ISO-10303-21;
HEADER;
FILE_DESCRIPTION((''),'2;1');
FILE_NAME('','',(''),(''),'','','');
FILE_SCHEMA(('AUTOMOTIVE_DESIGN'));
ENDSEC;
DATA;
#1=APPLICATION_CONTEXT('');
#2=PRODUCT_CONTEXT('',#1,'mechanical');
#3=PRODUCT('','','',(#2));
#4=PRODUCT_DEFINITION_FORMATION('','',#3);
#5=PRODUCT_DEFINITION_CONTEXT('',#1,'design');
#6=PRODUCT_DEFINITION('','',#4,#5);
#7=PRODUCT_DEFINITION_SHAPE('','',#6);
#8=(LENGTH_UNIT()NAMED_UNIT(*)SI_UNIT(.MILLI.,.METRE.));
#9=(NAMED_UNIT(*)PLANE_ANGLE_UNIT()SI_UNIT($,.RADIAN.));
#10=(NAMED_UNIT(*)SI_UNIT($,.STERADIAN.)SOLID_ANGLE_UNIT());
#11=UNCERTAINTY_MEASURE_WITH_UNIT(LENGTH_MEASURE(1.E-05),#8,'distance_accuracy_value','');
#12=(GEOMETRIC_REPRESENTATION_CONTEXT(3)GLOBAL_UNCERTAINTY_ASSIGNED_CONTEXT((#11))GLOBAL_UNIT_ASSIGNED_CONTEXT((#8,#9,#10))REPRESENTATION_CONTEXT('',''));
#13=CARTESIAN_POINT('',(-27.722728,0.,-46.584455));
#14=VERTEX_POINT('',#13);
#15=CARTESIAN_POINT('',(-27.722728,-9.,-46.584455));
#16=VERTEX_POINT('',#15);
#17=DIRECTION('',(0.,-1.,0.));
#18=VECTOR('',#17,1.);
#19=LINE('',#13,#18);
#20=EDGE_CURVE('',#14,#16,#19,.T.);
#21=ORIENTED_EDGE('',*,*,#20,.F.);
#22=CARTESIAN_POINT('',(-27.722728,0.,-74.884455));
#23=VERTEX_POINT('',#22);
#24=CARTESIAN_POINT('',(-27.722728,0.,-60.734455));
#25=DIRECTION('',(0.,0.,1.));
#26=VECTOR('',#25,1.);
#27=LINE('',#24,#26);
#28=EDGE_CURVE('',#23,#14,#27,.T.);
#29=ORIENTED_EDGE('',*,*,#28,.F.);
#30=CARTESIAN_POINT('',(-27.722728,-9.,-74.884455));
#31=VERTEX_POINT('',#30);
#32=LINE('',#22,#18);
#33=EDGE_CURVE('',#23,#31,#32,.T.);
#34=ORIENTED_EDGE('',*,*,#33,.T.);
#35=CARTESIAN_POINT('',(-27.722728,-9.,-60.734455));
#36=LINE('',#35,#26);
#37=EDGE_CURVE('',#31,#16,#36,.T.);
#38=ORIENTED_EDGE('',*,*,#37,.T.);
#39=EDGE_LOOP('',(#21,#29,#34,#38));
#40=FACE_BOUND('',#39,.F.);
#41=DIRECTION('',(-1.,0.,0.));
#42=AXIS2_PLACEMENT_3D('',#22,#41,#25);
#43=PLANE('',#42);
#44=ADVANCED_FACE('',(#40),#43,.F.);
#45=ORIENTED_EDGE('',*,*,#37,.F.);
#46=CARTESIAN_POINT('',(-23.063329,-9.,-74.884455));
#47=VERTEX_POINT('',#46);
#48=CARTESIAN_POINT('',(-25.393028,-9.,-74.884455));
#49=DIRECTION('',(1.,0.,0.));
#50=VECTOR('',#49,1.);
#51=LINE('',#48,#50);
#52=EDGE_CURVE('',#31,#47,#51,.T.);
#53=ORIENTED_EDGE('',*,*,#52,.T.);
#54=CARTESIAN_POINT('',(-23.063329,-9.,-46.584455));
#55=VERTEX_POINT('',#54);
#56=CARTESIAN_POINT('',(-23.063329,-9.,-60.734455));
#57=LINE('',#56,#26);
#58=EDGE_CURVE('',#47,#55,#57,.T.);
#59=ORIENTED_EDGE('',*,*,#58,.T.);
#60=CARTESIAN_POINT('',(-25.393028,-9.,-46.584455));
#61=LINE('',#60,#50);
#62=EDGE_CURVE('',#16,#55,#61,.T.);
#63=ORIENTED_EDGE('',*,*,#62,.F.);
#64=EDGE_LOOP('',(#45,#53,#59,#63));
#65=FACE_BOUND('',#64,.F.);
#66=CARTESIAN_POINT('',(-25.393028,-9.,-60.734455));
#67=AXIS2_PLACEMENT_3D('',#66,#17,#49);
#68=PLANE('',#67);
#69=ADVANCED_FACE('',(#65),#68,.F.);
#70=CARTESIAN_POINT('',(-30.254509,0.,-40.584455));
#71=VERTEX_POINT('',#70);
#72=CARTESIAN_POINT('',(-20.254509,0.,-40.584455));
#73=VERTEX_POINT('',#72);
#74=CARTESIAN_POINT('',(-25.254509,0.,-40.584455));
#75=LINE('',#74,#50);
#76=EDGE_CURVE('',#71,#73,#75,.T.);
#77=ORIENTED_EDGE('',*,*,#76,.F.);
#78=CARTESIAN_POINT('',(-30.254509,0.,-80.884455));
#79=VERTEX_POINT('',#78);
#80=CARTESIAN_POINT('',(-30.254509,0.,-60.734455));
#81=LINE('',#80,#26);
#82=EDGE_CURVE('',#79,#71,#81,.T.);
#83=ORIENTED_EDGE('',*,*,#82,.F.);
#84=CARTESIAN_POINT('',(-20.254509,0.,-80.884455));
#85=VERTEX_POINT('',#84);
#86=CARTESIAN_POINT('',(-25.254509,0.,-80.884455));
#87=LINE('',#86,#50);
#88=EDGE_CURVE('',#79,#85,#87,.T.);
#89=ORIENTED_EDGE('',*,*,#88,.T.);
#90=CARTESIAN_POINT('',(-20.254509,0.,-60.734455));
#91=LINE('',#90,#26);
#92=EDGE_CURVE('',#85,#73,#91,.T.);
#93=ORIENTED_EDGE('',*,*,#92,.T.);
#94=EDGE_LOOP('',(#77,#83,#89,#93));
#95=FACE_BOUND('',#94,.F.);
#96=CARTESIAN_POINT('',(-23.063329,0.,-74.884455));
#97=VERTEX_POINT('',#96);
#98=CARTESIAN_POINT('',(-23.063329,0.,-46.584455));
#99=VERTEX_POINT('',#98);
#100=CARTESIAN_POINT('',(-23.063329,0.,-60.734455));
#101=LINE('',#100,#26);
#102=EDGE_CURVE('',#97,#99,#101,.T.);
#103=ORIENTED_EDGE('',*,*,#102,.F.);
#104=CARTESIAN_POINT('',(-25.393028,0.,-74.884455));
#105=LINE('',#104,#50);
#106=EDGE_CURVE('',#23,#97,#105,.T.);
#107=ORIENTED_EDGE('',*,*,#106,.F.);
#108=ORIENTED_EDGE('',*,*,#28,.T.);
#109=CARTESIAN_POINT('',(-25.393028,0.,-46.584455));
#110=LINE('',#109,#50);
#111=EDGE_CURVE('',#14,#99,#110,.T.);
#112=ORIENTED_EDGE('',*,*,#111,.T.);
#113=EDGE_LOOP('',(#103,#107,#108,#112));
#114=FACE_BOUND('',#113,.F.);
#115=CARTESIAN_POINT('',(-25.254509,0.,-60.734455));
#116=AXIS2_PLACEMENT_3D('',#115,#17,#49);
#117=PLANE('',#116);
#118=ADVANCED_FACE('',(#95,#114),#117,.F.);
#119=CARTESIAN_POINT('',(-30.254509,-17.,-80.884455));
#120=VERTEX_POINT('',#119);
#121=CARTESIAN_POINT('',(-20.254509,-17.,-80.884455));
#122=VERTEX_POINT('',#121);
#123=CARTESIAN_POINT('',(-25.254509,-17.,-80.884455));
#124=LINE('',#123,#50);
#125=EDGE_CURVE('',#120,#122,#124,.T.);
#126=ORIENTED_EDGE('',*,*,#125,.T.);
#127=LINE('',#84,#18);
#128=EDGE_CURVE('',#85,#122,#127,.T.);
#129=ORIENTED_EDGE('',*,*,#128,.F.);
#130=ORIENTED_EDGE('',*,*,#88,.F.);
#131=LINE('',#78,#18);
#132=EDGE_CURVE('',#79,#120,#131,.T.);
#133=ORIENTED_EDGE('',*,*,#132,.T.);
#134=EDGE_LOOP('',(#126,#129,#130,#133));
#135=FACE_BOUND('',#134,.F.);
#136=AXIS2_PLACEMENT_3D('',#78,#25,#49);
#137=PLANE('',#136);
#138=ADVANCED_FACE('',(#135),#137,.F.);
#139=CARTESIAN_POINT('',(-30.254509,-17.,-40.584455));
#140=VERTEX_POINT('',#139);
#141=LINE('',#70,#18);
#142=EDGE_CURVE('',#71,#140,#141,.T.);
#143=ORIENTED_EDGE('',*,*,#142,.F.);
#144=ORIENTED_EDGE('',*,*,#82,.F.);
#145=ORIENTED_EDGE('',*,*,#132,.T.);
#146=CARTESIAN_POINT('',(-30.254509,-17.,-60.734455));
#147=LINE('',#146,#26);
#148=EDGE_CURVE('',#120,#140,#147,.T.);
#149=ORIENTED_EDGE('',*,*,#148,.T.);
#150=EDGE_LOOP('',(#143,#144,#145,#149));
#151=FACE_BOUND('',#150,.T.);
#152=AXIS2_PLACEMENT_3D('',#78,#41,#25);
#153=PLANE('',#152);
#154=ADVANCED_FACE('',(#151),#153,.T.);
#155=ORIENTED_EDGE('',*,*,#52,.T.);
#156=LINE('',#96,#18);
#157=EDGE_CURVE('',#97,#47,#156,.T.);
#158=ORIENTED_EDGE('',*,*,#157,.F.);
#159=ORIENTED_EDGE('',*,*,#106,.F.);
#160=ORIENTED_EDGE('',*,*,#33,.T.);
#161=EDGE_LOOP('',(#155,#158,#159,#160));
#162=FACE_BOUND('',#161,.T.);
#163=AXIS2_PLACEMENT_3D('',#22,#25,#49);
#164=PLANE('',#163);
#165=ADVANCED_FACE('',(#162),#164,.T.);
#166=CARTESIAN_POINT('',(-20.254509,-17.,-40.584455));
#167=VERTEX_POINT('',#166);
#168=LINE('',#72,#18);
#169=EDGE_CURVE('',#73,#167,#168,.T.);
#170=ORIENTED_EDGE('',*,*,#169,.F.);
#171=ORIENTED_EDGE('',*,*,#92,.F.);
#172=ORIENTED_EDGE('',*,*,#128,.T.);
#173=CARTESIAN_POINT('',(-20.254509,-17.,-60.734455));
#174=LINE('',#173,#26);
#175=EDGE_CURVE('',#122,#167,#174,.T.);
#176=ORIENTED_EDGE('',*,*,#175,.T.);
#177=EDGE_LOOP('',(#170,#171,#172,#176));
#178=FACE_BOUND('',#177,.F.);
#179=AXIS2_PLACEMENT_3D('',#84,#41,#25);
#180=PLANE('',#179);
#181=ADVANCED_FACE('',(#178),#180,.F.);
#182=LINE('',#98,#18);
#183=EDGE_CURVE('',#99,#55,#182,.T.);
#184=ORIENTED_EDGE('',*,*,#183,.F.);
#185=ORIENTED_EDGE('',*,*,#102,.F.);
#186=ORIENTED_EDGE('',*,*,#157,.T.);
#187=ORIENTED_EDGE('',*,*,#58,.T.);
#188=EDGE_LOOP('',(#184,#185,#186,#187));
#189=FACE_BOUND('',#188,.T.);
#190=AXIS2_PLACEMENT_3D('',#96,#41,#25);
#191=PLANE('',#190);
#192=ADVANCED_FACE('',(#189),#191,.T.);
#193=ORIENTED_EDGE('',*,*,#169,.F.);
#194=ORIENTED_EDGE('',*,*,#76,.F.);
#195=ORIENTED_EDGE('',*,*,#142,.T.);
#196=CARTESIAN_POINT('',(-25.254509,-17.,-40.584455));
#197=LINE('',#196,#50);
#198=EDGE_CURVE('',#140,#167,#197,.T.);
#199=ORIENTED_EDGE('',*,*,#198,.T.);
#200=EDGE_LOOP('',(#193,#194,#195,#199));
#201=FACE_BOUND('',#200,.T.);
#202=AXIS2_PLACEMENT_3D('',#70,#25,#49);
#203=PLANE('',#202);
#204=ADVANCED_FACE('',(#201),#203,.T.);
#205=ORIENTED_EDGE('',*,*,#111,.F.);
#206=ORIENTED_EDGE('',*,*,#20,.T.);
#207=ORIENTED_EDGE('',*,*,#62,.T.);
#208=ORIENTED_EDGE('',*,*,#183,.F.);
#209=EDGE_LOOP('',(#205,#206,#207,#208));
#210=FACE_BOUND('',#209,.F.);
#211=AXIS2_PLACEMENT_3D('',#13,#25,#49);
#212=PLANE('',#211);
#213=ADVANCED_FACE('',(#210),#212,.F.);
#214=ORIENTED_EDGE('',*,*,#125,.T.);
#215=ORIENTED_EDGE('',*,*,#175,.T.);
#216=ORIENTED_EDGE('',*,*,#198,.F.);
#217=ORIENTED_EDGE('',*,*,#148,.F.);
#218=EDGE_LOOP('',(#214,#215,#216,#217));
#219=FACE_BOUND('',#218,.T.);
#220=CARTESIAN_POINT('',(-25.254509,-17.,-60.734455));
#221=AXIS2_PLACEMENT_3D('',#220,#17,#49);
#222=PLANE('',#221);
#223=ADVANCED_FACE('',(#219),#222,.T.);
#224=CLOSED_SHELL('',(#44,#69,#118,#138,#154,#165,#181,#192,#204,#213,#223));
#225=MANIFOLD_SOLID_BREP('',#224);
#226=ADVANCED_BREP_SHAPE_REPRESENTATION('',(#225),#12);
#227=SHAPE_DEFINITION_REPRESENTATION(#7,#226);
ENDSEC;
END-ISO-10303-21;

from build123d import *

# Parameters (mm, degrees)
F0_W     = 10
F0_H     = 40.3
F0_W_2   = 4.6593984449
F0_H_2   = 28.3
F1_DEPTH = 17
F2_DEPTH = 9


# Not quite as in the source:
# - a feature names something its author has since deleted; it is built from what else it names


with BuildPart() as f1:
    # F0 (on Front) → F1 (new body)
    with BuildSketch(Plane.XZ):
        with Locations((-25.2545091997, -60.7344553381)):
            Rectangle(F0_W, F0_H)
        with Locations((-25.3930282849, -60.7344553381)):
            Rectangle(F0_W_2, F0_H_2, mode=Mode.SUBTRACT)
        with Locations((-25.3930282849, -60.7344553381)):
            Rectangle(F0_W_2, F0_H_2)
    extrude(amount=F1_DEPTH)

    # F0 (on Front) → F2 (cut)
    with BuildSketch(Plane.XZ):
        with Locations((-25.3930282849, -60.7344553381)):
            Rectangle(F0_W_2, F0_H_2)
    extrude(amount=F2_DEPTH, mode=Mode.SUBTRACT)


solid = f1.part
